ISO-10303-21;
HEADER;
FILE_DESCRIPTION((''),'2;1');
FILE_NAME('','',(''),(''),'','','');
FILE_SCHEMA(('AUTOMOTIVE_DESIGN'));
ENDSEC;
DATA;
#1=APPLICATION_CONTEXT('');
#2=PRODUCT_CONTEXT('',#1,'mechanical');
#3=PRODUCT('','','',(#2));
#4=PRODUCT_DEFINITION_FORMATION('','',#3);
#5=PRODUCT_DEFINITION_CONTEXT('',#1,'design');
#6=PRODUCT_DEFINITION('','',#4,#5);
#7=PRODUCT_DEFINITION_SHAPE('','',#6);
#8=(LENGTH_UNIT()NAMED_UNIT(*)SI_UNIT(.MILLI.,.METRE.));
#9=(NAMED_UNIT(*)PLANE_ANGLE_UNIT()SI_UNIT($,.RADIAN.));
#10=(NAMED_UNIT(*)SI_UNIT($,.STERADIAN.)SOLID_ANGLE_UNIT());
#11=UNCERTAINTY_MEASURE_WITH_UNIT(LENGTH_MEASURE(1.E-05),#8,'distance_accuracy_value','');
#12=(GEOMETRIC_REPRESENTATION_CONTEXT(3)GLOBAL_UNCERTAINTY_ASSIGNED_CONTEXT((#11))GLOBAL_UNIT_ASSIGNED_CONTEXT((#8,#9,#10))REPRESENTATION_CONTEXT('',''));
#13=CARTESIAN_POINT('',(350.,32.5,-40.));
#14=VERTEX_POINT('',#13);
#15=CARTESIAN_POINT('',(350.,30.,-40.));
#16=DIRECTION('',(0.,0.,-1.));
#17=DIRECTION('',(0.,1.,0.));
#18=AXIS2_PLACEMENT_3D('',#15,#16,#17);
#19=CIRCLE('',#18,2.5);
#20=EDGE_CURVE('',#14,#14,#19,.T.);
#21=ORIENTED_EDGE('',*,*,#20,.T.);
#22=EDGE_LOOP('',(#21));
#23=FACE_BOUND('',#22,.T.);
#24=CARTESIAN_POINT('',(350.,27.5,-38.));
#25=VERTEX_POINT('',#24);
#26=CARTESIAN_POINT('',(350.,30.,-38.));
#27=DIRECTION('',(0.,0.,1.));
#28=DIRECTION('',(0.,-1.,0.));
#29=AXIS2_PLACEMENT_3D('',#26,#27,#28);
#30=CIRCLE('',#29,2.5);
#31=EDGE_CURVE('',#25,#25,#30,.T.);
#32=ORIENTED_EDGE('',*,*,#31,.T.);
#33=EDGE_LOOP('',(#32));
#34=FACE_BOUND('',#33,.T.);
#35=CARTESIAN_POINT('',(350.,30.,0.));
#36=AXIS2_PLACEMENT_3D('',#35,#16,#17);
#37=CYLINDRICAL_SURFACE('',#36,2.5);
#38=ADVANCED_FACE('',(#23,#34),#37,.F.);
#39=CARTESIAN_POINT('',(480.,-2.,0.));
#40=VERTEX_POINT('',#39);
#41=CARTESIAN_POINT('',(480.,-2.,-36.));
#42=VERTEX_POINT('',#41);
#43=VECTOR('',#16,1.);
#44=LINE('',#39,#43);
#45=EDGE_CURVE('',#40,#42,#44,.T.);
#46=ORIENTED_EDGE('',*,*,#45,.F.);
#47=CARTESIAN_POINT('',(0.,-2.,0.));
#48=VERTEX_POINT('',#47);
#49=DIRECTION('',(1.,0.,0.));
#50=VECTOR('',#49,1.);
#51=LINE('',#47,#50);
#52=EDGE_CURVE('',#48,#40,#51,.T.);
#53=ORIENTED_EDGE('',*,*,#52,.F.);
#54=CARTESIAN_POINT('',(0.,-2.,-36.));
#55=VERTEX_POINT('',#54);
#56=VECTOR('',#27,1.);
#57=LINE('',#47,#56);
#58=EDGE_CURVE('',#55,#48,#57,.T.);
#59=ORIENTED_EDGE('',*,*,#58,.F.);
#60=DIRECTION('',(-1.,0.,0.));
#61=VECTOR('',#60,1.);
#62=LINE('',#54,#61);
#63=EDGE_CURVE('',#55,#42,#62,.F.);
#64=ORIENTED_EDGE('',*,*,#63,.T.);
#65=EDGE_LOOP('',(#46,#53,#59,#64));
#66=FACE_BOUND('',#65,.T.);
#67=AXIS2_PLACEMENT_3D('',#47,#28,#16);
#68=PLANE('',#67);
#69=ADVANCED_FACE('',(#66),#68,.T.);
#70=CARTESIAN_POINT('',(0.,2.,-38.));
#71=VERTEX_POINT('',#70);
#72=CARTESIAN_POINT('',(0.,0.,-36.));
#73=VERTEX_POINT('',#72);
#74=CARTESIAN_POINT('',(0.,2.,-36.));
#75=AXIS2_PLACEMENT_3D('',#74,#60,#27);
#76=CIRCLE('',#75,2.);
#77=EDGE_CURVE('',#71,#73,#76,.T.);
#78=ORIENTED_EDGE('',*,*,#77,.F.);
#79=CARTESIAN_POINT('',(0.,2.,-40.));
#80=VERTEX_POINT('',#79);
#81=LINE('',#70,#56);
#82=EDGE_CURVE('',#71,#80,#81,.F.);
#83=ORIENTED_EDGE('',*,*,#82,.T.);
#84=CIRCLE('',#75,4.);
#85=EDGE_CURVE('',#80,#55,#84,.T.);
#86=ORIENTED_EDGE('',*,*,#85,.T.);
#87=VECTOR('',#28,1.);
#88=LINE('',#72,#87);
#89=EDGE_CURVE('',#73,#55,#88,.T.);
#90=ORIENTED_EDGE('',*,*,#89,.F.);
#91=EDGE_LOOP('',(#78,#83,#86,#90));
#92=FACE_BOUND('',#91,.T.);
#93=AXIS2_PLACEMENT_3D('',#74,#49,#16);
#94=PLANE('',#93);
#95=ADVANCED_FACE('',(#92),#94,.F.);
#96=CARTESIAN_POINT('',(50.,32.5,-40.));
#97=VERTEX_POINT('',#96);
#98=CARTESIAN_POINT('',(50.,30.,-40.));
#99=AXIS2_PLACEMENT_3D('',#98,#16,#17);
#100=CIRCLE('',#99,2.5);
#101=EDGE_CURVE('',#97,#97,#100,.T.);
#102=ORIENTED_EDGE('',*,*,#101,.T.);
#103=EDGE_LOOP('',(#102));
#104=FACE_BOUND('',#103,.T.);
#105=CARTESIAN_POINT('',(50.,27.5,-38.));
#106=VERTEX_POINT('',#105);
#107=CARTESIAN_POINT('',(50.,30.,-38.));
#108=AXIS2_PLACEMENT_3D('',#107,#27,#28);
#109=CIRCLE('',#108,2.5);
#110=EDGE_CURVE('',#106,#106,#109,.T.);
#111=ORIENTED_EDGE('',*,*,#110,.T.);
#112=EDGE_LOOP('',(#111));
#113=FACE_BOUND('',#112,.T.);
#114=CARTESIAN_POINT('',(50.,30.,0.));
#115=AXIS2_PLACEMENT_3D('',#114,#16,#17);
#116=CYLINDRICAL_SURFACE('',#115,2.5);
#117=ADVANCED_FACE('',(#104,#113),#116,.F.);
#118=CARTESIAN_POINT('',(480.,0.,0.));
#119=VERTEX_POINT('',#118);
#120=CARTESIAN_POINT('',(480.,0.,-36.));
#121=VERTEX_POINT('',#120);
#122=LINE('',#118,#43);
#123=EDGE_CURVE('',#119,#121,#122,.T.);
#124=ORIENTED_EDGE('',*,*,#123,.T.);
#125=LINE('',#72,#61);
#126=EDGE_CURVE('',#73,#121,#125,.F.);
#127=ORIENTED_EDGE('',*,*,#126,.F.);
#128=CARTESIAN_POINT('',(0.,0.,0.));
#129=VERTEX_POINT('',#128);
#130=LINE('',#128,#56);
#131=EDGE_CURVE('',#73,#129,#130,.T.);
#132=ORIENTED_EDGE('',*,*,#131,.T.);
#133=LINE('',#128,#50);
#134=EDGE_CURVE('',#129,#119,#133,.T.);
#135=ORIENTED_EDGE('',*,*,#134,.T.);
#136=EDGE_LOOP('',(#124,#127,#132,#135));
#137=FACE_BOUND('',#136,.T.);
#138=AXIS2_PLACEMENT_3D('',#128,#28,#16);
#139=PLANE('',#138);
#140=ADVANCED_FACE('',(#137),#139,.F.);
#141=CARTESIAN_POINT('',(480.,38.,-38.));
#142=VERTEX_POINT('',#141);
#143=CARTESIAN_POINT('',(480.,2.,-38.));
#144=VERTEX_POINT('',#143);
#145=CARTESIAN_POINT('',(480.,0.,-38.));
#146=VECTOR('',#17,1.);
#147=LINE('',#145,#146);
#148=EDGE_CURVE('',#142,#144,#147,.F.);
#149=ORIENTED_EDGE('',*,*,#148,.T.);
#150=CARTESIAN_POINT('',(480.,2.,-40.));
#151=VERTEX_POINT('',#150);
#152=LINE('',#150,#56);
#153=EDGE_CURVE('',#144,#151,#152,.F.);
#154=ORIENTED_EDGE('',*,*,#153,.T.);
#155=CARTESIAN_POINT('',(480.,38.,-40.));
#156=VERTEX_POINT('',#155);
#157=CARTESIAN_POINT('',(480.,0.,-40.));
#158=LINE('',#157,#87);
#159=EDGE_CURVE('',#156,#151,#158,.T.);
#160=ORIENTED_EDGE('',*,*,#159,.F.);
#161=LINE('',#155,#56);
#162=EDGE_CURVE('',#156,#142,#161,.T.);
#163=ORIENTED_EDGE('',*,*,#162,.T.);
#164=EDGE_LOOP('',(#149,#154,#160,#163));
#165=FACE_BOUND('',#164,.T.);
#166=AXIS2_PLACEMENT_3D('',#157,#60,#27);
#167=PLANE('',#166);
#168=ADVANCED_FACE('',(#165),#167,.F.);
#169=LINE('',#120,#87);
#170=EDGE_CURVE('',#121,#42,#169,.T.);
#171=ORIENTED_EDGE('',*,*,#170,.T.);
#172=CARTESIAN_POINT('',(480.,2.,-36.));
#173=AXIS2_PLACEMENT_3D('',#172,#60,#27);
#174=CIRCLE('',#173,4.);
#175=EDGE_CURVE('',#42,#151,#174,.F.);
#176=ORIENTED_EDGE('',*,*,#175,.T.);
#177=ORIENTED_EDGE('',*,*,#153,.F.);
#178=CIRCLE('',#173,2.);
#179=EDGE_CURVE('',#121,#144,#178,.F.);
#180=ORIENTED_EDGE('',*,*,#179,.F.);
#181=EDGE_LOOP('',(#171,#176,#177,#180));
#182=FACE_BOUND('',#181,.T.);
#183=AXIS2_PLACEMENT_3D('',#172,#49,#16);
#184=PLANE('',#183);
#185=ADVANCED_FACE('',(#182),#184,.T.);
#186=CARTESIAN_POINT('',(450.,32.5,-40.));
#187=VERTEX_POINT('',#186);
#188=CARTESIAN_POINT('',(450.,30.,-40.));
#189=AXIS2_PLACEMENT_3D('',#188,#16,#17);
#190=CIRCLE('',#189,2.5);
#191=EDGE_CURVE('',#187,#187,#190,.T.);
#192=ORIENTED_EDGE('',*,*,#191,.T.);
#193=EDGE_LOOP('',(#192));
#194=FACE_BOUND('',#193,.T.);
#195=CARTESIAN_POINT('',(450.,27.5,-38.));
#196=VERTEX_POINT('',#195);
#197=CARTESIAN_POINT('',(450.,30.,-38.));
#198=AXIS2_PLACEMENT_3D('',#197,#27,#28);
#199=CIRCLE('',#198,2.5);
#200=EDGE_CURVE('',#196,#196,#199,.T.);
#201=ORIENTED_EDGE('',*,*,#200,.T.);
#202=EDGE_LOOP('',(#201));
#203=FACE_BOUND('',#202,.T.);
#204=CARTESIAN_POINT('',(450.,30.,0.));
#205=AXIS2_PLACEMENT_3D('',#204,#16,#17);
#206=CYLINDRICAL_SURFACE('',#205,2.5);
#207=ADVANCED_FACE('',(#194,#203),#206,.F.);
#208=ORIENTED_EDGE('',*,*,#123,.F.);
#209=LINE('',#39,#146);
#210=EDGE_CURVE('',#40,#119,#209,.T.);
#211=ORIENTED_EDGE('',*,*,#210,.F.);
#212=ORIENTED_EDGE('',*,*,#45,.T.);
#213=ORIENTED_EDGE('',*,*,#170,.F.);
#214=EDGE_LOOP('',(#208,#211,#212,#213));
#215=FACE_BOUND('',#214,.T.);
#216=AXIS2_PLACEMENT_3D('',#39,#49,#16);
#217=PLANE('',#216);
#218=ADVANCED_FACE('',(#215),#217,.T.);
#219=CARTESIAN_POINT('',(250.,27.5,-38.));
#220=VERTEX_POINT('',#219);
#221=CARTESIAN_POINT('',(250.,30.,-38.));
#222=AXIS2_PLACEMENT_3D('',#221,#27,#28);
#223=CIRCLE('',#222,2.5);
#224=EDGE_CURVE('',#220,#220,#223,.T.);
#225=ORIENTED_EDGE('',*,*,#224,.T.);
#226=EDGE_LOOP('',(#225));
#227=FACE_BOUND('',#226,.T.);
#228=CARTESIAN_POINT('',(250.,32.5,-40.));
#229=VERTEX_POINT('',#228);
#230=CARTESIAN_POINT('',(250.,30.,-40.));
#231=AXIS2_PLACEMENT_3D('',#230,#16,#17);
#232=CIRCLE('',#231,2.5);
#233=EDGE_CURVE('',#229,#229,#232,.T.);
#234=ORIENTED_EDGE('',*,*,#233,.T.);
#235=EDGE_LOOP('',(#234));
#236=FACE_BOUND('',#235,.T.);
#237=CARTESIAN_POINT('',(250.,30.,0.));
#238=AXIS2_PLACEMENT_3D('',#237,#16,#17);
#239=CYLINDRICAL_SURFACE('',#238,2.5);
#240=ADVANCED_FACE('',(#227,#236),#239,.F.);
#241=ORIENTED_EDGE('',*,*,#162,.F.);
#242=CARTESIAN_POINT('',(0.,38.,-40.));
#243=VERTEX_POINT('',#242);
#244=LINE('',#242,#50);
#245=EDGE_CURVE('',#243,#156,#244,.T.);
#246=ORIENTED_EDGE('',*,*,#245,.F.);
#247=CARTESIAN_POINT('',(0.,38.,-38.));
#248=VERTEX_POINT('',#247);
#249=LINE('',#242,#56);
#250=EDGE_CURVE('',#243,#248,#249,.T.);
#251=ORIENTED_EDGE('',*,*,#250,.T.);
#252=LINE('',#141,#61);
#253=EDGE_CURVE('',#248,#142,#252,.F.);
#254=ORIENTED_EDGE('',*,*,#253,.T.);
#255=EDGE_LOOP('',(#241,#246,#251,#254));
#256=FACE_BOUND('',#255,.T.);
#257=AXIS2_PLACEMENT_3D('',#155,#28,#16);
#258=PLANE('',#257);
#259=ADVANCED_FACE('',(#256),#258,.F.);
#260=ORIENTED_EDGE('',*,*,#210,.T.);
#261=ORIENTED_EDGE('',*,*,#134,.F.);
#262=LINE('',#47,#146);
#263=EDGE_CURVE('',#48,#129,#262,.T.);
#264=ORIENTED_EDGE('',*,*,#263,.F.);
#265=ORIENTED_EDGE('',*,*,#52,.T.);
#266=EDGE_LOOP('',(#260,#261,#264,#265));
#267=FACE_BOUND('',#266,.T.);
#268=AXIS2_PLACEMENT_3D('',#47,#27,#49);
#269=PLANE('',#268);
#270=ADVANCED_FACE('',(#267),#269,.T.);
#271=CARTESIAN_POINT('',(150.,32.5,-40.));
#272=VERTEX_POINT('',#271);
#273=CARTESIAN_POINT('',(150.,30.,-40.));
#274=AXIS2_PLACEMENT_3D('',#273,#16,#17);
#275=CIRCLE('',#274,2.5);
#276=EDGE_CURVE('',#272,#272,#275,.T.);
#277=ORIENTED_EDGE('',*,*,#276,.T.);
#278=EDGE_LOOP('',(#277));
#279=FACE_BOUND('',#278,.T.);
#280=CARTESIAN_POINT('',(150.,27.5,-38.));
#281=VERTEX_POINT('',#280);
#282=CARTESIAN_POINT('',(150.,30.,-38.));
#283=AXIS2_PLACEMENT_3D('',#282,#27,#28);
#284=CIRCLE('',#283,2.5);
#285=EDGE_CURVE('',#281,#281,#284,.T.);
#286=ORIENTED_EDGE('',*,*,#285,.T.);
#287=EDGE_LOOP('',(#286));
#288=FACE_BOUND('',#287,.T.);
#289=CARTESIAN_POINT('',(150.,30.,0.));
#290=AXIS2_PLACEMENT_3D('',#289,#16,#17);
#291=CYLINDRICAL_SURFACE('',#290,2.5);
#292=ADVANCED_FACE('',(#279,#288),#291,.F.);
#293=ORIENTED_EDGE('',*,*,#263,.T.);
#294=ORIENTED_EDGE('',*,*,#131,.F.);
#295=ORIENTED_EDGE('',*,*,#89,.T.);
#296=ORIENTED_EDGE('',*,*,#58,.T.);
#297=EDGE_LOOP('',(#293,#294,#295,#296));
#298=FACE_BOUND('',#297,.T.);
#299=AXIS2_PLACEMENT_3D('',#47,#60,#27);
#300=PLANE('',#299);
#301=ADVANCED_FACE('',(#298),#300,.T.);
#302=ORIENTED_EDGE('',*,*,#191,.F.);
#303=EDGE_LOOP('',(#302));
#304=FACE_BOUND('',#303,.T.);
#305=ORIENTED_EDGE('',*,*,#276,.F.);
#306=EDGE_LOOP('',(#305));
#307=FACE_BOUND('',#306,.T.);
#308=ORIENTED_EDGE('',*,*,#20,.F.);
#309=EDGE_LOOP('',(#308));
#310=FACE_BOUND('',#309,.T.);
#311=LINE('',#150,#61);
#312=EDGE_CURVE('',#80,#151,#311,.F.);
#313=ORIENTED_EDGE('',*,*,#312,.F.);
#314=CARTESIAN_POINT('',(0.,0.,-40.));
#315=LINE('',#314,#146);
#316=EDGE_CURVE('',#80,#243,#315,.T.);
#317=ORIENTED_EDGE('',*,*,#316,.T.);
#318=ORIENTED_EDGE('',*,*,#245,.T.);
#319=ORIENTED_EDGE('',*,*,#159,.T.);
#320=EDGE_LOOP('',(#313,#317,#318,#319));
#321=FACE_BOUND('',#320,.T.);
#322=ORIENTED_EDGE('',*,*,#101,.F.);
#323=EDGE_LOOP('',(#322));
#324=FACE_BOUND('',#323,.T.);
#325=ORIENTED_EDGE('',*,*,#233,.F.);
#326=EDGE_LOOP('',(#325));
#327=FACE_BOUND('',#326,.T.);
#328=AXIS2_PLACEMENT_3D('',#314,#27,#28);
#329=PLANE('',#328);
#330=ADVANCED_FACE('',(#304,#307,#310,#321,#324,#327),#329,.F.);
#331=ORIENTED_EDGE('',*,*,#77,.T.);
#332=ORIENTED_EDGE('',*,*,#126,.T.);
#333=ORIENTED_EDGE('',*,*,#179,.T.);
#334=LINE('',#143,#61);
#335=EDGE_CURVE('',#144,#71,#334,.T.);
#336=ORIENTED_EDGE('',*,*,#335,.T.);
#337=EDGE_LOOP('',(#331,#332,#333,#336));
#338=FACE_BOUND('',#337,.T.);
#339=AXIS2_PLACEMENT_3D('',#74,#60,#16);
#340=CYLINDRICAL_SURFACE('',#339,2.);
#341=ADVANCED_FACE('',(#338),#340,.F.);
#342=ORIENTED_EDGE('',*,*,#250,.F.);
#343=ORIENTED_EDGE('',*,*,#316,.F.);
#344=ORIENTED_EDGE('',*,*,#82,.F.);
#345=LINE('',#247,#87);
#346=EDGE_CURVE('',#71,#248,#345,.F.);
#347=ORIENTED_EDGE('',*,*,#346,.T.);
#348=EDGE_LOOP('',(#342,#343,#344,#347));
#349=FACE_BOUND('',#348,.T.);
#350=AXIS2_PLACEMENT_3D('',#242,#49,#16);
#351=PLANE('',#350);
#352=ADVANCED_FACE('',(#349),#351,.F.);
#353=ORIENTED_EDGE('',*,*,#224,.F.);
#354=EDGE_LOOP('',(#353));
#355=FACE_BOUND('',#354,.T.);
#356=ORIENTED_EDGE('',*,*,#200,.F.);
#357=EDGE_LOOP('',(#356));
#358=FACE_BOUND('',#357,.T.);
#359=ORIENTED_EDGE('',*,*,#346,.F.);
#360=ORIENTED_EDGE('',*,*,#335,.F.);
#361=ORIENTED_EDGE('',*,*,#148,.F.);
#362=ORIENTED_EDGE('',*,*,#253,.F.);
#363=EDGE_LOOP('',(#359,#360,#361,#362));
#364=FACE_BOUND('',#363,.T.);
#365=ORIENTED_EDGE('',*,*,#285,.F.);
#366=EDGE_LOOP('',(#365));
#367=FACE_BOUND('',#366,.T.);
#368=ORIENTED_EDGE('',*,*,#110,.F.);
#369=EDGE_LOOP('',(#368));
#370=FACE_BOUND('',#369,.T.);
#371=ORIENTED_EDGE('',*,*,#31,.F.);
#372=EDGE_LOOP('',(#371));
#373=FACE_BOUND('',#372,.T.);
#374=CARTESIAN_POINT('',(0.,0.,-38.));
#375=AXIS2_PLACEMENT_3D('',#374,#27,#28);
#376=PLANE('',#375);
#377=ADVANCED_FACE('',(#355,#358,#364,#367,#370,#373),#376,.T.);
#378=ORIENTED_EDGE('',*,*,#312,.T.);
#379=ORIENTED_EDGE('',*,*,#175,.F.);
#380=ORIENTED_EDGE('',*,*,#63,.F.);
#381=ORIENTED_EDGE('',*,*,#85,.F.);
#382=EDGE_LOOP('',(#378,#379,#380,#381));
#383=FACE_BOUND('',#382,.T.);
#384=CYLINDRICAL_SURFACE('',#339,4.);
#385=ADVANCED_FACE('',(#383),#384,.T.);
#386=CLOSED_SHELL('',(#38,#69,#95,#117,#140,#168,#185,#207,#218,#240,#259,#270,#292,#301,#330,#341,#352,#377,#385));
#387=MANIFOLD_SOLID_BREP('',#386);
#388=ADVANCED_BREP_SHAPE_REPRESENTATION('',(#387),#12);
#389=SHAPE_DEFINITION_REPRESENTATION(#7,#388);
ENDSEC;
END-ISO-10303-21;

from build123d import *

# Parameters (mm, degrees)
SKETCH_1_W                       = 480
SKETCH_1_H                       = 40
SM_BASE_FLANGE_1_DEPTH           = 2
SM_EDGE_FLANGE_1_STRIP_W         = 12
SM_EDGE_FLANGE_1_STRIP_H         = 2
SM_EDGE_FLANGE_1_STRIP_CUT_DEPTH = 480
SM_EDGE_FLANGE_1_DEPTH           = 480
SKETCH_9_R                       = 2.5
CUT_EXTRUDE_1_DEPTH              = 484.160428843


# Sheet-metal steps are written as plain solids
with BuildPart() as part:
    # Sketch 1 → Базовая кромка1 (new body)
    with BuildSketch(Plane(origin=(0, 0, 0), x_dir=(1, 0, 0), z_dir=(0, 1, 0))):
        with Locations((240, 20)):
            Rectangle(SKETCH_1_W, SKETCH_1_H)
    extrude(amount=-SM_BASE_FLANGE_1_DEPTH)

    # Ребро-кромка1 strip (across the edge) → Ребро-кромка1 strip cut (cut)
    with BuildSketch(Plane(origin=(480, 0, -40), x_dir=(0, 0, 1), z_dir=(-1, 0, 0))):
        with Locations((-2, -1)):
            Rectangle(SM_EDGE_FLANGE_1_STRIP_W, SM_EDGE_FLANGE_1_STRIP_H)
    extrude(amount=SM_EDGE_FLANGE_1_STRIP_CUT_DEPTH, mode=Mode.SUBTRACT)

    # Ребро-кромка1 section (across the edge) → Ребро-кромка1 (add)
    with BuildSketch(Plane(origin=(480, 0, -40), x_dir=(0, 0, 1), z_dir=(-1, 0, 0))):
        with BuildLine():
            Line((0, 2), (0, 38))
            Line((0, 38), (2, 38))
            Line((2, 38), (2, 2))
            ThreePointArc((2, 2), (2.585786438, 0.585786438), (4, 0))
            Line((4, 0), (4, -2))
            ThreePointArc((4, -2), (1.171572875, -0.828427125), (0, 2))
        make_face()
    extrude(amount=SM_EDGE_FLANGE_1_DEPTH)

    # Эскиз9 → Вырез-Вытянуть1 (cut, through all)
    with BuildSketch(Plane(origin=(0, 0, -40), x_dir=(-1, 0, 0), z_dir=(0, 0, -1))):
        with Locations(Location((-450, 30, 0), (0, 0, 90))):
            Circle(SKETCH_9_R)
        with Locations(Location((-350, 30, 0), (0, 0, 90))):
            Circle(SKETCH_9_R)
        with Locations(Location((-250, 30, 0), (0, 0, 90))):
            Circle(SKETCH_9_R)
        with Locations(Location((-150, 30, 0), (0, 0, 90))):
            Circle(SKETCH_9_R)
        with Locations(Location((-50, 30, 0), (0, 0, 90))):
            Circle(SKETCH_9_R)
    extrude(amount=-CUT_EXTRUDE_1_DEPTH, mode=Mode.SUBTRACT)


solid = part.part
